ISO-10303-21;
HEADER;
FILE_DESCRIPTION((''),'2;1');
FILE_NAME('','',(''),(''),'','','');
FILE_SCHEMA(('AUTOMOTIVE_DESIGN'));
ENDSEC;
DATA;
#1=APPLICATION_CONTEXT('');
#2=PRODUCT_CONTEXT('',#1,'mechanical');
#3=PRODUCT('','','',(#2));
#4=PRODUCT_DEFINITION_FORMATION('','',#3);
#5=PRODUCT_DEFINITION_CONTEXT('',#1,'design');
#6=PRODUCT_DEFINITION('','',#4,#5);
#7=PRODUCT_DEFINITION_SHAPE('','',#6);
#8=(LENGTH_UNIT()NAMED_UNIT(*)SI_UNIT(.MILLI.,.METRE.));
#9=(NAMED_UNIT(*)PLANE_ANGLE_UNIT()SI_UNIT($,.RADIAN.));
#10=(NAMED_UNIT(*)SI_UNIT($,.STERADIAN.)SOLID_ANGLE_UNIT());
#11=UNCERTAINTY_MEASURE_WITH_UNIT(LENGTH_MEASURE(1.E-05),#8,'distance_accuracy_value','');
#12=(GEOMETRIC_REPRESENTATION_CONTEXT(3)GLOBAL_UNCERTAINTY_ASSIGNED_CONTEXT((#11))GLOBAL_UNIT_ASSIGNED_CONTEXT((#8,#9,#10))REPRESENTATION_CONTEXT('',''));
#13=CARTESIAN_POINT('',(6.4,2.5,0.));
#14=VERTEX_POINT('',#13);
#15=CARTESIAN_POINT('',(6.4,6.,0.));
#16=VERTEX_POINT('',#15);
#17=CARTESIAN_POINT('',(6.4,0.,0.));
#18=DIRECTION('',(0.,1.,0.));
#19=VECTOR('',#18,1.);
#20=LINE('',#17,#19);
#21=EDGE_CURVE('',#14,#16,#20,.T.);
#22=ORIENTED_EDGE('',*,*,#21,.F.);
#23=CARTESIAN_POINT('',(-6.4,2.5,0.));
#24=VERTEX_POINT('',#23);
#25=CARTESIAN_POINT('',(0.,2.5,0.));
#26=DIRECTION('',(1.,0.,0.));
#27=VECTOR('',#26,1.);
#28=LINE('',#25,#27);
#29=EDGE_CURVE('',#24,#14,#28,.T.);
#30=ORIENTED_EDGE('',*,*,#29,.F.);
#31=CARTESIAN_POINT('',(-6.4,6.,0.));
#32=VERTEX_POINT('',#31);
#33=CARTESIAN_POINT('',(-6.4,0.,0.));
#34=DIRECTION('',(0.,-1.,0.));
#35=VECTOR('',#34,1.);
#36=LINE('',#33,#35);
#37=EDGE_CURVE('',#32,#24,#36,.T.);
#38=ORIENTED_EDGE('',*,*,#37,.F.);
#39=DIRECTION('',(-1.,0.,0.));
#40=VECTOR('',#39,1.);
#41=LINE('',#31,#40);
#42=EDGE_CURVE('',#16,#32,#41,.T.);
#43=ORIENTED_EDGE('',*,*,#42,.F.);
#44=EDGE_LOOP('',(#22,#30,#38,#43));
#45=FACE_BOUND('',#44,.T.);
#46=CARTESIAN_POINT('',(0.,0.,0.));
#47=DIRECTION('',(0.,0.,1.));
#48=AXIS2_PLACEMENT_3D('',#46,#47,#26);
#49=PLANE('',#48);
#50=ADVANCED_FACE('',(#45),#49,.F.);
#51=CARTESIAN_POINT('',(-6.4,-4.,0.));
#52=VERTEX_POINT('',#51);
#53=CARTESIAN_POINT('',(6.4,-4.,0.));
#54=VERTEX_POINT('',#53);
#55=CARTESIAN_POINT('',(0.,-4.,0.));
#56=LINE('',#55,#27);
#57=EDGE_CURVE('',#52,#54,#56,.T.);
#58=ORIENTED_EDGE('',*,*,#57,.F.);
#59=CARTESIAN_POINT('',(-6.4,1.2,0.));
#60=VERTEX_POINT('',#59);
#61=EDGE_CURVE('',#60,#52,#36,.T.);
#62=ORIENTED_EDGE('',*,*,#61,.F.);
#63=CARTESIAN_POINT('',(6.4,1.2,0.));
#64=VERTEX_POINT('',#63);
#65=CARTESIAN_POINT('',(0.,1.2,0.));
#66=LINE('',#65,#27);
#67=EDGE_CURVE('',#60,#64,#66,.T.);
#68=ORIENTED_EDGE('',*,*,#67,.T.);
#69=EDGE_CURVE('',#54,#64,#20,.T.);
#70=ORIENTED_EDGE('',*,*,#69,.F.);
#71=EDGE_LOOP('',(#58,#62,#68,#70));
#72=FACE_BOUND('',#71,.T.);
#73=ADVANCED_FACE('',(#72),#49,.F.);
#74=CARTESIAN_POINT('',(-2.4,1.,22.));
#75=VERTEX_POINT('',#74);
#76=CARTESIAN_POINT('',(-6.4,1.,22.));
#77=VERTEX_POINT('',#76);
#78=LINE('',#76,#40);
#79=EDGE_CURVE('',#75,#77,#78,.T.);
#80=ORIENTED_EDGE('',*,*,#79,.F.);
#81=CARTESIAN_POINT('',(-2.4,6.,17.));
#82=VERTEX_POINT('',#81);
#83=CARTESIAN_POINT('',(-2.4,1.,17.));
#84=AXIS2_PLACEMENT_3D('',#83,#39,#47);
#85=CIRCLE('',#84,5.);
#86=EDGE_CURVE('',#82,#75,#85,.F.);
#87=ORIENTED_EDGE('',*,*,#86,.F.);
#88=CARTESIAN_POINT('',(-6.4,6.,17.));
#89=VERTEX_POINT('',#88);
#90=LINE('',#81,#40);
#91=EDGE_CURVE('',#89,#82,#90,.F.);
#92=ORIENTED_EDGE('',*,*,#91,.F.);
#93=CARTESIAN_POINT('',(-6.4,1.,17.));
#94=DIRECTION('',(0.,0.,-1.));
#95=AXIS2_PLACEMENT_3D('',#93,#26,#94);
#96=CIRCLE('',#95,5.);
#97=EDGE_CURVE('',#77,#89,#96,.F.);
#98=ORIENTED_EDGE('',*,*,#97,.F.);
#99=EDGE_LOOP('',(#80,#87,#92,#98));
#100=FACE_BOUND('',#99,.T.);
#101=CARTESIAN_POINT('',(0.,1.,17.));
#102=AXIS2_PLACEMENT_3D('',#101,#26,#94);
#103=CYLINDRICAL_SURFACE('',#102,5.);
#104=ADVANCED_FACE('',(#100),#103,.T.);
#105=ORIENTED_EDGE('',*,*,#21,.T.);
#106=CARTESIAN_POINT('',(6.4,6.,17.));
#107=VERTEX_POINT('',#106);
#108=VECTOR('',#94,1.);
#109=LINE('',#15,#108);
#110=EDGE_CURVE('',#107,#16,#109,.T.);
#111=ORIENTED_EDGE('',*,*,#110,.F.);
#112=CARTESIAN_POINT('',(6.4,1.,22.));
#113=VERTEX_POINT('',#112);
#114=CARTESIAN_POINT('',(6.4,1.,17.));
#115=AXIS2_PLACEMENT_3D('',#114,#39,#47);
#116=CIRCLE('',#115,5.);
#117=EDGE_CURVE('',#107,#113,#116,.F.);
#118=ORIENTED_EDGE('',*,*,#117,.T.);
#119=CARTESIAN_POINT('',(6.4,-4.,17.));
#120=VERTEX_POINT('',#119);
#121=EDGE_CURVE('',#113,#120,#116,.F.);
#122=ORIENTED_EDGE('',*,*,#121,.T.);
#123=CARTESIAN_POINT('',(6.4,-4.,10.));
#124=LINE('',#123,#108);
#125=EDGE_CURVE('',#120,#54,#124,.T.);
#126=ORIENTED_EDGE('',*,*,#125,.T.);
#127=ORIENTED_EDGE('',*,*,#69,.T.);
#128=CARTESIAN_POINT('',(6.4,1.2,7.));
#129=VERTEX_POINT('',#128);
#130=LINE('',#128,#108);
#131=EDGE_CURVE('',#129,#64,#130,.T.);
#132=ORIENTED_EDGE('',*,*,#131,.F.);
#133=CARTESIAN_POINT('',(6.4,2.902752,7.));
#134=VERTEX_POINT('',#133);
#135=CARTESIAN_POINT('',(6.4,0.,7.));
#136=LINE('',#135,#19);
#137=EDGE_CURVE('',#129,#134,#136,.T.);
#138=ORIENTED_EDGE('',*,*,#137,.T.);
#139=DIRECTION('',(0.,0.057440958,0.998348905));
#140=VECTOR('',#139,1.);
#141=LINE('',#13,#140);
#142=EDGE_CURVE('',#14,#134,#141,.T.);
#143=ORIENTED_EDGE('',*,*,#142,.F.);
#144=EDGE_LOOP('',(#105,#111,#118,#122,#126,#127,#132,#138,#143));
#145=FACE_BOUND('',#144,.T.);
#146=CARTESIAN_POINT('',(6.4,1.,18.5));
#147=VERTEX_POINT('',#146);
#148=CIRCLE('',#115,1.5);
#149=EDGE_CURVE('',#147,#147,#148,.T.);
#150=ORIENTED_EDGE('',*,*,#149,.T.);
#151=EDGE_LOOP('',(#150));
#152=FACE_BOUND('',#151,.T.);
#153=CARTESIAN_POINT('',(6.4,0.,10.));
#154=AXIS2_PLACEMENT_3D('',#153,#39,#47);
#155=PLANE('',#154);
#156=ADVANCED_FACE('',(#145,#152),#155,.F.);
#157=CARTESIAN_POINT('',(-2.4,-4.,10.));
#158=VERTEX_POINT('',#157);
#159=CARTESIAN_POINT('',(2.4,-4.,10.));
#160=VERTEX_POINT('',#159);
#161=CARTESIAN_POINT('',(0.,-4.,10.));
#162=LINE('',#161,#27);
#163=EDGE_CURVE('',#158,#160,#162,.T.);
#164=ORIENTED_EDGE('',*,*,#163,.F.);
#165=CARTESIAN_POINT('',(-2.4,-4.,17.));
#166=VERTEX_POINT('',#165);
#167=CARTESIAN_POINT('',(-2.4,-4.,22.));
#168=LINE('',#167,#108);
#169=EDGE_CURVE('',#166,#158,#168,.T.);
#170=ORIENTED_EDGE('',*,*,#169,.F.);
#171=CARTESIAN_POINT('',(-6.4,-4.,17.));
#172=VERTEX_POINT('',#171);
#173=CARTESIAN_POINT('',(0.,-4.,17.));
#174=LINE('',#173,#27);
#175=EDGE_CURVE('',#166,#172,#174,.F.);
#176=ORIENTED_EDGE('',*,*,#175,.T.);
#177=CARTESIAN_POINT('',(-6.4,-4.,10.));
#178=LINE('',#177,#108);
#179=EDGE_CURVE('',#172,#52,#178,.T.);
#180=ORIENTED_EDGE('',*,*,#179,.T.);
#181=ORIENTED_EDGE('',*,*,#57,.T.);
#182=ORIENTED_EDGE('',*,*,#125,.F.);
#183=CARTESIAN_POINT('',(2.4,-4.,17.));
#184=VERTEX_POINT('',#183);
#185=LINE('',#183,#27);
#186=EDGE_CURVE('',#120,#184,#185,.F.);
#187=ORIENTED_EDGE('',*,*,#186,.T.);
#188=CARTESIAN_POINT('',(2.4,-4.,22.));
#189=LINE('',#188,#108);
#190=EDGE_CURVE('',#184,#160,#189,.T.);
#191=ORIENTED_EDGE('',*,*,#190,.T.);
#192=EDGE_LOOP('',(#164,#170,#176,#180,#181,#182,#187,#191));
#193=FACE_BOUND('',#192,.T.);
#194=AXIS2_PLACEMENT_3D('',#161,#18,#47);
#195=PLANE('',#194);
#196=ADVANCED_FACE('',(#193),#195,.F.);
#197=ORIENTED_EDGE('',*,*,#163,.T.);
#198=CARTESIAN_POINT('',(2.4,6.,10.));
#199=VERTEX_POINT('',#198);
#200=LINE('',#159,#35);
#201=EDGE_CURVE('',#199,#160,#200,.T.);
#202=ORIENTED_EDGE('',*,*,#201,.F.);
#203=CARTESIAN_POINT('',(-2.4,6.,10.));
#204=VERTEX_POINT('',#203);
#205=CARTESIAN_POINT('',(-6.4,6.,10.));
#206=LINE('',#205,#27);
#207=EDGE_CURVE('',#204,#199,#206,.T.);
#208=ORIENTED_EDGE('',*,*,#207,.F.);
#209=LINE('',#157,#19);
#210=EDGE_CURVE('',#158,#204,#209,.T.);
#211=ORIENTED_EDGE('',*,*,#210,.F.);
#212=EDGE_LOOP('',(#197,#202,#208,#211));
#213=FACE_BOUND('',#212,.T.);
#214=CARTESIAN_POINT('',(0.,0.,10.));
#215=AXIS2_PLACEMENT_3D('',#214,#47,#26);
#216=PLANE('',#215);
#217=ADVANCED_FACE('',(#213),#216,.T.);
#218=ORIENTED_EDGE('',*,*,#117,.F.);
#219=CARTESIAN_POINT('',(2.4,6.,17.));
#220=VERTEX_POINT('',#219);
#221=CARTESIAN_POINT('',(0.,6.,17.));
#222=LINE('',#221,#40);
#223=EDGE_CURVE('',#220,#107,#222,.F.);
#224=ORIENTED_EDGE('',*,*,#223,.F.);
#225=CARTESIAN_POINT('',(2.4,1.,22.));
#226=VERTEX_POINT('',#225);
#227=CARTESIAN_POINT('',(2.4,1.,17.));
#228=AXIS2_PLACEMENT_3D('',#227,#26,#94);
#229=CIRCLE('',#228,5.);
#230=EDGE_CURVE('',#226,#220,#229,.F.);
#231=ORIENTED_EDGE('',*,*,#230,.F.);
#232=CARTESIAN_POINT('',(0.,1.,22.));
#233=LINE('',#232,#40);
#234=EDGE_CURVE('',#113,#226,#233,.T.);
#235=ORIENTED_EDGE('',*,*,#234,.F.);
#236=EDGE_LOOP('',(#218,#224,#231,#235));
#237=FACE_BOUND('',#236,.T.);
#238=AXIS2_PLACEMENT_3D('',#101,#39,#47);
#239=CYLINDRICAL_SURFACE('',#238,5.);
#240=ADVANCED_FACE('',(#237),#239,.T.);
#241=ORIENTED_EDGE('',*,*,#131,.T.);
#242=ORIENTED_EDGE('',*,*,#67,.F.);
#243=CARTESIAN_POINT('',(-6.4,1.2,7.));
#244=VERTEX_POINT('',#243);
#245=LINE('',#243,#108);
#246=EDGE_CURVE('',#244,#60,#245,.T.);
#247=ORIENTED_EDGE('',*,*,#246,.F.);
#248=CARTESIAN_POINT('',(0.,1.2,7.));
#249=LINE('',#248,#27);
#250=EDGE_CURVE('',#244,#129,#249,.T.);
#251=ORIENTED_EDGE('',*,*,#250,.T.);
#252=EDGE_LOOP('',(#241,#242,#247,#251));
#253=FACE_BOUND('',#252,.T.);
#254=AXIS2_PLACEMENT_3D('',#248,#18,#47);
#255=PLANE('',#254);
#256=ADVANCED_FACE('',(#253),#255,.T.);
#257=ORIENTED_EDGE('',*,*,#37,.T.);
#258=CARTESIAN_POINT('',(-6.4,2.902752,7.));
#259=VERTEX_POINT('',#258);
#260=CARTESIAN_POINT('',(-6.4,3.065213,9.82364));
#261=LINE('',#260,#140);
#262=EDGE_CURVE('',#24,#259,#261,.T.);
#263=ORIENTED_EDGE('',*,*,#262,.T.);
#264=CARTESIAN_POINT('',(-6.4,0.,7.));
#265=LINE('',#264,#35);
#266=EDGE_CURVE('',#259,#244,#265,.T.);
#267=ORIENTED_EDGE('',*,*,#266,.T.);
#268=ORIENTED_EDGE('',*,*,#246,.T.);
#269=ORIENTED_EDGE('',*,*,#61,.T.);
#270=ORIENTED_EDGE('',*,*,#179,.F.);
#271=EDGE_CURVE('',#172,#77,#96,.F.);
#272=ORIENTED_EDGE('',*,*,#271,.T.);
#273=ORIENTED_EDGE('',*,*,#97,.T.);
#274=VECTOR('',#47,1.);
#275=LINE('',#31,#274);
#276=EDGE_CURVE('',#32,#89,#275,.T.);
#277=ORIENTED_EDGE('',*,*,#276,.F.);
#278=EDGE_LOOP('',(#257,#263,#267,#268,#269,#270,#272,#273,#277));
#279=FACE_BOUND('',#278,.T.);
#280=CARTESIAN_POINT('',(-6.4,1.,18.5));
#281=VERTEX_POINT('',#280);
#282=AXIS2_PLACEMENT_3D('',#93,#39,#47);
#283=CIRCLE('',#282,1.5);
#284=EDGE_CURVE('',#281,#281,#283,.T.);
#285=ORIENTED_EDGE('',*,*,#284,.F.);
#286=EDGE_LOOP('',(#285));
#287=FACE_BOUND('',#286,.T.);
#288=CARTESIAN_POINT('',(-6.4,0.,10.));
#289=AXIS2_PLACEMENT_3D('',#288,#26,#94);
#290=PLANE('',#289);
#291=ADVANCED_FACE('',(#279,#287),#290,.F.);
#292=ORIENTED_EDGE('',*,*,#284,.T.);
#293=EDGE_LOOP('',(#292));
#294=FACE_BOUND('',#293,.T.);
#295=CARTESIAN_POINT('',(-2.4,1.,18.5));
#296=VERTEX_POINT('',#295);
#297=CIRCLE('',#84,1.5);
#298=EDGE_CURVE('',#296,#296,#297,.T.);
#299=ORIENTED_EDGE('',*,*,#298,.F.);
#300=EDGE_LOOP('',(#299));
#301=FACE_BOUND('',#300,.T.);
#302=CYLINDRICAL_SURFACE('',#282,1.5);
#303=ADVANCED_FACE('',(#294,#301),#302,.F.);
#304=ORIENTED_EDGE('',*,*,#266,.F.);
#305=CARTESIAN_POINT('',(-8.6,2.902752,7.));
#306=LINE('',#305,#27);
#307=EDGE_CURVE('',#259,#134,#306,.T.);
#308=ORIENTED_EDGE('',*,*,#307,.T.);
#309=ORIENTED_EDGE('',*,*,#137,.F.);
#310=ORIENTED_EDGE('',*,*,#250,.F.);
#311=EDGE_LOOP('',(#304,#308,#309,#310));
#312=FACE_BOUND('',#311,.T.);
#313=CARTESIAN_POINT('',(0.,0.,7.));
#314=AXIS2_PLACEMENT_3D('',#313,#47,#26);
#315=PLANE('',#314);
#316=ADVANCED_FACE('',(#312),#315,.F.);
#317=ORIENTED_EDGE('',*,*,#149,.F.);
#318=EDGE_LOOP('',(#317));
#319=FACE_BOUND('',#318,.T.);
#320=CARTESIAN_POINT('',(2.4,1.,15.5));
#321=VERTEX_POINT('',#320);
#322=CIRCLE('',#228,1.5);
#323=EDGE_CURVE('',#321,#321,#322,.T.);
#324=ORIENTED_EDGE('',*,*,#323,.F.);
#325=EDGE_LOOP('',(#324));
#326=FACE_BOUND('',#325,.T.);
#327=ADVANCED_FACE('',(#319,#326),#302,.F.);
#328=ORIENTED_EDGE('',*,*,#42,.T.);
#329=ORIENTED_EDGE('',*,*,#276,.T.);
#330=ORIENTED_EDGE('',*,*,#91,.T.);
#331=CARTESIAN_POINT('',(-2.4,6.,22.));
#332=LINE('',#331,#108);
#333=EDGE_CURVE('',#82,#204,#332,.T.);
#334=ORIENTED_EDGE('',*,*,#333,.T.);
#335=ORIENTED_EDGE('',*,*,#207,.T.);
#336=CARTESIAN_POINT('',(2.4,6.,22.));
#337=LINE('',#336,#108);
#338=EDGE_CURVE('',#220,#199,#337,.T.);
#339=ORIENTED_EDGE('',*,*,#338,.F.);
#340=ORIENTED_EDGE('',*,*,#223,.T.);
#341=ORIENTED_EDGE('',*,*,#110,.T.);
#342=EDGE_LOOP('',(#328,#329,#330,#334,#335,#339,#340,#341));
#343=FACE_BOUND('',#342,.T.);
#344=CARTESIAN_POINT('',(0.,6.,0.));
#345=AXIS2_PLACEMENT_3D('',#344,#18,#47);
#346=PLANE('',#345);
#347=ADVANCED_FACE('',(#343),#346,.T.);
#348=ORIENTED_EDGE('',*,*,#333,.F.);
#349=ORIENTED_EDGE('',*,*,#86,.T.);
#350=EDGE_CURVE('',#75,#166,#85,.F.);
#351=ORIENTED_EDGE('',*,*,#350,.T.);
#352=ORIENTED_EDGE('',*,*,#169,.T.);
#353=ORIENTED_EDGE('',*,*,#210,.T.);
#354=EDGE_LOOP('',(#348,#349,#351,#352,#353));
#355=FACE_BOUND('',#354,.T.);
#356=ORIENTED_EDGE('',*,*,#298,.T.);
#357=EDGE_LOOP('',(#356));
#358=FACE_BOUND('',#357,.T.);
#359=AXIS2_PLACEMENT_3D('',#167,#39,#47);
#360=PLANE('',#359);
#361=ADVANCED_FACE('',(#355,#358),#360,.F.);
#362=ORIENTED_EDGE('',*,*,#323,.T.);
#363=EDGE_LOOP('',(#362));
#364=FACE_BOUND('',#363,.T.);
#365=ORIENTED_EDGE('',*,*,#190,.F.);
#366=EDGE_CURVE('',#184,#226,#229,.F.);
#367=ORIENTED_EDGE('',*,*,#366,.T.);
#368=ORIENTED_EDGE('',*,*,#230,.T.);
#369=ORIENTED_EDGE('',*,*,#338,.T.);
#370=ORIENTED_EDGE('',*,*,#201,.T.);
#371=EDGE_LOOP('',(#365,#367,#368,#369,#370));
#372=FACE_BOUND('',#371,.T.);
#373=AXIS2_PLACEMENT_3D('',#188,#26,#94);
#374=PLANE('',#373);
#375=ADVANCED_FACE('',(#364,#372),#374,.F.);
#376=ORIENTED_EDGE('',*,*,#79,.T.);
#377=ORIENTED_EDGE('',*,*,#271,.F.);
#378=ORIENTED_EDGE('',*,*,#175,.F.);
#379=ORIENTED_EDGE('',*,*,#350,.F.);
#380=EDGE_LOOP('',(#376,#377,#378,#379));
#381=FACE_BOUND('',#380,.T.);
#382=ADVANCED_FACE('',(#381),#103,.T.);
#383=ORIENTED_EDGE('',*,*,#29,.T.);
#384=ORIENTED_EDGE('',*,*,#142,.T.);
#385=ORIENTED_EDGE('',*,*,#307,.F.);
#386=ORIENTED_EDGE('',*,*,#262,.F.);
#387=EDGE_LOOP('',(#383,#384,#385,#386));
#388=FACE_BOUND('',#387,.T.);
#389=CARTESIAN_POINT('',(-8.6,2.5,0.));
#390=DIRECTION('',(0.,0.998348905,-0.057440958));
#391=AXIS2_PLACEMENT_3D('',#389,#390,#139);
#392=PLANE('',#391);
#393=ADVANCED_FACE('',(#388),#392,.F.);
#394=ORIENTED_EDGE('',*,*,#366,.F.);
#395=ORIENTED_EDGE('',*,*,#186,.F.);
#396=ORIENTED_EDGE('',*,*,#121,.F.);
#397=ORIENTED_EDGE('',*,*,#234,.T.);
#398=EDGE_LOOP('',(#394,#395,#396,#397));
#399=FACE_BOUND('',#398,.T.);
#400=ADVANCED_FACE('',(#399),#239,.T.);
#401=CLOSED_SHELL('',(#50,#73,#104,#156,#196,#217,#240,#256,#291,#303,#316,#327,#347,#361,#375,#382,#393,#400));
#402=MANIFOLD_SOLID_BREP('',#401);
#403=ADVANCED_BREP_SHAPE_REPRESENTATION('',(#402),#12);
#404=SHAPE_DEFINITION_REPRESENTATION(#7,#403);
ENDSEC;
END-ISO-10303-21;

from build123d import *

# Parameters (mm, degrees)
BOSS_EXTRUDE1_DEPTH = 10
SKETCH1_3_W         = 12.8
SKETCH1_3_H         = 1.3
BOSS_EXTRUDE2_DEPTH = 7
SKETCH1_5_W         = 12.8
SKETCH1_5_H         = 1.3
CUT_EXTRUDE1_DEPTH  = 7
SKETCH4_W           = 12.8
SKETCH4_H           = 10
BOSS_EXTRUDE3_DEPTH = 1
CUT_EXTRUDE3_DEPTH  = 15
SKETCH8_W           = 12.8
SKETCH8_H           = 10
BOSS_EXTRUDE4_DEPTH = 1
SKETCH10_W          = 4
SKETCH10_H          = 10
BOSS_EXTRUDE5_DEPTH = 12
FILLET1_R           = 5
HOLE1_D             = 3
HOLE1_DEPTH         = 100


with BuildPart() as part:
    # Sketch1 → Boss-Extrude1 (new body)
    with BuildSketch(Plane.XY):
        Polygon((6.4, 4), (-6.4, 4), (-6.4, -1), (-6.4, -4), (6.4, -4), (6.4, -1), align=None)
    extrude(amount=BOSS_EXTRUDE1_DEPTH)

    # Sketch1<3> → Boss-Extrude2 (add)
    with BuildSketch(Plane.XY):
        with Locations((0, 1.85)):
            Rectangle(SKETCH1_3_W, SKETCH1_3_H)
    extrude(amount=BOSS_EXTRUDE2_DEPTH)

    # Sketch1<5> → Cut-Extrude1 (cut)
    with BuildSketch(Plane.XY):
        with Locations((0, 1.85)):
            Rectangle(SKETCH1_5_W, SKETCH1_5_H)
    extrude(amount=CUT_EXTRUDE1_DEPTH, mode=Mode.SUBTRACT)

    # Sketch4 → Boss-Extrude3 (add)
    with BuildSketch(Plane(origin=(0, 4, 0), x_dir=(1, 0, 0), z_dir=(0, 1, 0))):
        with Locations((0, -5)):
            Rectangle(SKETCH4_W, SKETCH4_H)
    extrude(amount=BOSS_EXTRUDE3_DEPTH)

    # Sketch6 → Cut-Extrude3 (cut)
    with BuildSketch(Plane(origin=(6.4, 0, 0), x_dir=(0, 0, -1), z_dir=(1, 0, 0))):
        Polygon((0, 2.5), (-7, 2.902751688), (-7, 2.5), align=None)
    extrude(amount=-CUT_EXTRUDE3_DEPTH, mode=Mode.SUBTRACT)

    # Sketch8 → Boss-Extrude4 (add)
    with BuildSketch(Plane(origin=(0, 5, 0), x_dir=(1, 0, 0), z_dir=(0, 1, 0))):
        with Locations((0, -5)):
            Rectangle(SKETCH8_W, SKETCH8_H)
    extrude(amount=BOSS_EXTRUDE4_DEPTH)

    # Sketch10 → Boss-Extrude5 (add)
    with BuildSketch(Plane.XY.offset(10)):
        with Locations((-4.4, 1)):
            Rectangle(SKETCH10_W, SKETCH10_H)
        with Locations((4.4, 1)):
            Rectangle(SKETCH10_W, SKETCH10_H)
    extrude(amount=BOSS_EXTRUDE5_DEPTH)

    # Fillet1
    fillet1_edges = [part.edges().sort_by_distance(p)[0] for p in [
        (-4.4, -4, 22),
        (-4.4, 6, 22),
        (4.4, -4, 22),
        (4.4, 6, 22),
    ]]
    fillet(fillet1_edges, radius=FILLET1_R - 0.0001)  # a hair under: the kernel refuses the full size

    # Hole1
    with Locations(Plane.ZY.offset(6.4)):
        with Locations((17, 1)):
            Hole(HOLE1_D / 2, depth=HOLE1_DEPTH)


solid = part.part
